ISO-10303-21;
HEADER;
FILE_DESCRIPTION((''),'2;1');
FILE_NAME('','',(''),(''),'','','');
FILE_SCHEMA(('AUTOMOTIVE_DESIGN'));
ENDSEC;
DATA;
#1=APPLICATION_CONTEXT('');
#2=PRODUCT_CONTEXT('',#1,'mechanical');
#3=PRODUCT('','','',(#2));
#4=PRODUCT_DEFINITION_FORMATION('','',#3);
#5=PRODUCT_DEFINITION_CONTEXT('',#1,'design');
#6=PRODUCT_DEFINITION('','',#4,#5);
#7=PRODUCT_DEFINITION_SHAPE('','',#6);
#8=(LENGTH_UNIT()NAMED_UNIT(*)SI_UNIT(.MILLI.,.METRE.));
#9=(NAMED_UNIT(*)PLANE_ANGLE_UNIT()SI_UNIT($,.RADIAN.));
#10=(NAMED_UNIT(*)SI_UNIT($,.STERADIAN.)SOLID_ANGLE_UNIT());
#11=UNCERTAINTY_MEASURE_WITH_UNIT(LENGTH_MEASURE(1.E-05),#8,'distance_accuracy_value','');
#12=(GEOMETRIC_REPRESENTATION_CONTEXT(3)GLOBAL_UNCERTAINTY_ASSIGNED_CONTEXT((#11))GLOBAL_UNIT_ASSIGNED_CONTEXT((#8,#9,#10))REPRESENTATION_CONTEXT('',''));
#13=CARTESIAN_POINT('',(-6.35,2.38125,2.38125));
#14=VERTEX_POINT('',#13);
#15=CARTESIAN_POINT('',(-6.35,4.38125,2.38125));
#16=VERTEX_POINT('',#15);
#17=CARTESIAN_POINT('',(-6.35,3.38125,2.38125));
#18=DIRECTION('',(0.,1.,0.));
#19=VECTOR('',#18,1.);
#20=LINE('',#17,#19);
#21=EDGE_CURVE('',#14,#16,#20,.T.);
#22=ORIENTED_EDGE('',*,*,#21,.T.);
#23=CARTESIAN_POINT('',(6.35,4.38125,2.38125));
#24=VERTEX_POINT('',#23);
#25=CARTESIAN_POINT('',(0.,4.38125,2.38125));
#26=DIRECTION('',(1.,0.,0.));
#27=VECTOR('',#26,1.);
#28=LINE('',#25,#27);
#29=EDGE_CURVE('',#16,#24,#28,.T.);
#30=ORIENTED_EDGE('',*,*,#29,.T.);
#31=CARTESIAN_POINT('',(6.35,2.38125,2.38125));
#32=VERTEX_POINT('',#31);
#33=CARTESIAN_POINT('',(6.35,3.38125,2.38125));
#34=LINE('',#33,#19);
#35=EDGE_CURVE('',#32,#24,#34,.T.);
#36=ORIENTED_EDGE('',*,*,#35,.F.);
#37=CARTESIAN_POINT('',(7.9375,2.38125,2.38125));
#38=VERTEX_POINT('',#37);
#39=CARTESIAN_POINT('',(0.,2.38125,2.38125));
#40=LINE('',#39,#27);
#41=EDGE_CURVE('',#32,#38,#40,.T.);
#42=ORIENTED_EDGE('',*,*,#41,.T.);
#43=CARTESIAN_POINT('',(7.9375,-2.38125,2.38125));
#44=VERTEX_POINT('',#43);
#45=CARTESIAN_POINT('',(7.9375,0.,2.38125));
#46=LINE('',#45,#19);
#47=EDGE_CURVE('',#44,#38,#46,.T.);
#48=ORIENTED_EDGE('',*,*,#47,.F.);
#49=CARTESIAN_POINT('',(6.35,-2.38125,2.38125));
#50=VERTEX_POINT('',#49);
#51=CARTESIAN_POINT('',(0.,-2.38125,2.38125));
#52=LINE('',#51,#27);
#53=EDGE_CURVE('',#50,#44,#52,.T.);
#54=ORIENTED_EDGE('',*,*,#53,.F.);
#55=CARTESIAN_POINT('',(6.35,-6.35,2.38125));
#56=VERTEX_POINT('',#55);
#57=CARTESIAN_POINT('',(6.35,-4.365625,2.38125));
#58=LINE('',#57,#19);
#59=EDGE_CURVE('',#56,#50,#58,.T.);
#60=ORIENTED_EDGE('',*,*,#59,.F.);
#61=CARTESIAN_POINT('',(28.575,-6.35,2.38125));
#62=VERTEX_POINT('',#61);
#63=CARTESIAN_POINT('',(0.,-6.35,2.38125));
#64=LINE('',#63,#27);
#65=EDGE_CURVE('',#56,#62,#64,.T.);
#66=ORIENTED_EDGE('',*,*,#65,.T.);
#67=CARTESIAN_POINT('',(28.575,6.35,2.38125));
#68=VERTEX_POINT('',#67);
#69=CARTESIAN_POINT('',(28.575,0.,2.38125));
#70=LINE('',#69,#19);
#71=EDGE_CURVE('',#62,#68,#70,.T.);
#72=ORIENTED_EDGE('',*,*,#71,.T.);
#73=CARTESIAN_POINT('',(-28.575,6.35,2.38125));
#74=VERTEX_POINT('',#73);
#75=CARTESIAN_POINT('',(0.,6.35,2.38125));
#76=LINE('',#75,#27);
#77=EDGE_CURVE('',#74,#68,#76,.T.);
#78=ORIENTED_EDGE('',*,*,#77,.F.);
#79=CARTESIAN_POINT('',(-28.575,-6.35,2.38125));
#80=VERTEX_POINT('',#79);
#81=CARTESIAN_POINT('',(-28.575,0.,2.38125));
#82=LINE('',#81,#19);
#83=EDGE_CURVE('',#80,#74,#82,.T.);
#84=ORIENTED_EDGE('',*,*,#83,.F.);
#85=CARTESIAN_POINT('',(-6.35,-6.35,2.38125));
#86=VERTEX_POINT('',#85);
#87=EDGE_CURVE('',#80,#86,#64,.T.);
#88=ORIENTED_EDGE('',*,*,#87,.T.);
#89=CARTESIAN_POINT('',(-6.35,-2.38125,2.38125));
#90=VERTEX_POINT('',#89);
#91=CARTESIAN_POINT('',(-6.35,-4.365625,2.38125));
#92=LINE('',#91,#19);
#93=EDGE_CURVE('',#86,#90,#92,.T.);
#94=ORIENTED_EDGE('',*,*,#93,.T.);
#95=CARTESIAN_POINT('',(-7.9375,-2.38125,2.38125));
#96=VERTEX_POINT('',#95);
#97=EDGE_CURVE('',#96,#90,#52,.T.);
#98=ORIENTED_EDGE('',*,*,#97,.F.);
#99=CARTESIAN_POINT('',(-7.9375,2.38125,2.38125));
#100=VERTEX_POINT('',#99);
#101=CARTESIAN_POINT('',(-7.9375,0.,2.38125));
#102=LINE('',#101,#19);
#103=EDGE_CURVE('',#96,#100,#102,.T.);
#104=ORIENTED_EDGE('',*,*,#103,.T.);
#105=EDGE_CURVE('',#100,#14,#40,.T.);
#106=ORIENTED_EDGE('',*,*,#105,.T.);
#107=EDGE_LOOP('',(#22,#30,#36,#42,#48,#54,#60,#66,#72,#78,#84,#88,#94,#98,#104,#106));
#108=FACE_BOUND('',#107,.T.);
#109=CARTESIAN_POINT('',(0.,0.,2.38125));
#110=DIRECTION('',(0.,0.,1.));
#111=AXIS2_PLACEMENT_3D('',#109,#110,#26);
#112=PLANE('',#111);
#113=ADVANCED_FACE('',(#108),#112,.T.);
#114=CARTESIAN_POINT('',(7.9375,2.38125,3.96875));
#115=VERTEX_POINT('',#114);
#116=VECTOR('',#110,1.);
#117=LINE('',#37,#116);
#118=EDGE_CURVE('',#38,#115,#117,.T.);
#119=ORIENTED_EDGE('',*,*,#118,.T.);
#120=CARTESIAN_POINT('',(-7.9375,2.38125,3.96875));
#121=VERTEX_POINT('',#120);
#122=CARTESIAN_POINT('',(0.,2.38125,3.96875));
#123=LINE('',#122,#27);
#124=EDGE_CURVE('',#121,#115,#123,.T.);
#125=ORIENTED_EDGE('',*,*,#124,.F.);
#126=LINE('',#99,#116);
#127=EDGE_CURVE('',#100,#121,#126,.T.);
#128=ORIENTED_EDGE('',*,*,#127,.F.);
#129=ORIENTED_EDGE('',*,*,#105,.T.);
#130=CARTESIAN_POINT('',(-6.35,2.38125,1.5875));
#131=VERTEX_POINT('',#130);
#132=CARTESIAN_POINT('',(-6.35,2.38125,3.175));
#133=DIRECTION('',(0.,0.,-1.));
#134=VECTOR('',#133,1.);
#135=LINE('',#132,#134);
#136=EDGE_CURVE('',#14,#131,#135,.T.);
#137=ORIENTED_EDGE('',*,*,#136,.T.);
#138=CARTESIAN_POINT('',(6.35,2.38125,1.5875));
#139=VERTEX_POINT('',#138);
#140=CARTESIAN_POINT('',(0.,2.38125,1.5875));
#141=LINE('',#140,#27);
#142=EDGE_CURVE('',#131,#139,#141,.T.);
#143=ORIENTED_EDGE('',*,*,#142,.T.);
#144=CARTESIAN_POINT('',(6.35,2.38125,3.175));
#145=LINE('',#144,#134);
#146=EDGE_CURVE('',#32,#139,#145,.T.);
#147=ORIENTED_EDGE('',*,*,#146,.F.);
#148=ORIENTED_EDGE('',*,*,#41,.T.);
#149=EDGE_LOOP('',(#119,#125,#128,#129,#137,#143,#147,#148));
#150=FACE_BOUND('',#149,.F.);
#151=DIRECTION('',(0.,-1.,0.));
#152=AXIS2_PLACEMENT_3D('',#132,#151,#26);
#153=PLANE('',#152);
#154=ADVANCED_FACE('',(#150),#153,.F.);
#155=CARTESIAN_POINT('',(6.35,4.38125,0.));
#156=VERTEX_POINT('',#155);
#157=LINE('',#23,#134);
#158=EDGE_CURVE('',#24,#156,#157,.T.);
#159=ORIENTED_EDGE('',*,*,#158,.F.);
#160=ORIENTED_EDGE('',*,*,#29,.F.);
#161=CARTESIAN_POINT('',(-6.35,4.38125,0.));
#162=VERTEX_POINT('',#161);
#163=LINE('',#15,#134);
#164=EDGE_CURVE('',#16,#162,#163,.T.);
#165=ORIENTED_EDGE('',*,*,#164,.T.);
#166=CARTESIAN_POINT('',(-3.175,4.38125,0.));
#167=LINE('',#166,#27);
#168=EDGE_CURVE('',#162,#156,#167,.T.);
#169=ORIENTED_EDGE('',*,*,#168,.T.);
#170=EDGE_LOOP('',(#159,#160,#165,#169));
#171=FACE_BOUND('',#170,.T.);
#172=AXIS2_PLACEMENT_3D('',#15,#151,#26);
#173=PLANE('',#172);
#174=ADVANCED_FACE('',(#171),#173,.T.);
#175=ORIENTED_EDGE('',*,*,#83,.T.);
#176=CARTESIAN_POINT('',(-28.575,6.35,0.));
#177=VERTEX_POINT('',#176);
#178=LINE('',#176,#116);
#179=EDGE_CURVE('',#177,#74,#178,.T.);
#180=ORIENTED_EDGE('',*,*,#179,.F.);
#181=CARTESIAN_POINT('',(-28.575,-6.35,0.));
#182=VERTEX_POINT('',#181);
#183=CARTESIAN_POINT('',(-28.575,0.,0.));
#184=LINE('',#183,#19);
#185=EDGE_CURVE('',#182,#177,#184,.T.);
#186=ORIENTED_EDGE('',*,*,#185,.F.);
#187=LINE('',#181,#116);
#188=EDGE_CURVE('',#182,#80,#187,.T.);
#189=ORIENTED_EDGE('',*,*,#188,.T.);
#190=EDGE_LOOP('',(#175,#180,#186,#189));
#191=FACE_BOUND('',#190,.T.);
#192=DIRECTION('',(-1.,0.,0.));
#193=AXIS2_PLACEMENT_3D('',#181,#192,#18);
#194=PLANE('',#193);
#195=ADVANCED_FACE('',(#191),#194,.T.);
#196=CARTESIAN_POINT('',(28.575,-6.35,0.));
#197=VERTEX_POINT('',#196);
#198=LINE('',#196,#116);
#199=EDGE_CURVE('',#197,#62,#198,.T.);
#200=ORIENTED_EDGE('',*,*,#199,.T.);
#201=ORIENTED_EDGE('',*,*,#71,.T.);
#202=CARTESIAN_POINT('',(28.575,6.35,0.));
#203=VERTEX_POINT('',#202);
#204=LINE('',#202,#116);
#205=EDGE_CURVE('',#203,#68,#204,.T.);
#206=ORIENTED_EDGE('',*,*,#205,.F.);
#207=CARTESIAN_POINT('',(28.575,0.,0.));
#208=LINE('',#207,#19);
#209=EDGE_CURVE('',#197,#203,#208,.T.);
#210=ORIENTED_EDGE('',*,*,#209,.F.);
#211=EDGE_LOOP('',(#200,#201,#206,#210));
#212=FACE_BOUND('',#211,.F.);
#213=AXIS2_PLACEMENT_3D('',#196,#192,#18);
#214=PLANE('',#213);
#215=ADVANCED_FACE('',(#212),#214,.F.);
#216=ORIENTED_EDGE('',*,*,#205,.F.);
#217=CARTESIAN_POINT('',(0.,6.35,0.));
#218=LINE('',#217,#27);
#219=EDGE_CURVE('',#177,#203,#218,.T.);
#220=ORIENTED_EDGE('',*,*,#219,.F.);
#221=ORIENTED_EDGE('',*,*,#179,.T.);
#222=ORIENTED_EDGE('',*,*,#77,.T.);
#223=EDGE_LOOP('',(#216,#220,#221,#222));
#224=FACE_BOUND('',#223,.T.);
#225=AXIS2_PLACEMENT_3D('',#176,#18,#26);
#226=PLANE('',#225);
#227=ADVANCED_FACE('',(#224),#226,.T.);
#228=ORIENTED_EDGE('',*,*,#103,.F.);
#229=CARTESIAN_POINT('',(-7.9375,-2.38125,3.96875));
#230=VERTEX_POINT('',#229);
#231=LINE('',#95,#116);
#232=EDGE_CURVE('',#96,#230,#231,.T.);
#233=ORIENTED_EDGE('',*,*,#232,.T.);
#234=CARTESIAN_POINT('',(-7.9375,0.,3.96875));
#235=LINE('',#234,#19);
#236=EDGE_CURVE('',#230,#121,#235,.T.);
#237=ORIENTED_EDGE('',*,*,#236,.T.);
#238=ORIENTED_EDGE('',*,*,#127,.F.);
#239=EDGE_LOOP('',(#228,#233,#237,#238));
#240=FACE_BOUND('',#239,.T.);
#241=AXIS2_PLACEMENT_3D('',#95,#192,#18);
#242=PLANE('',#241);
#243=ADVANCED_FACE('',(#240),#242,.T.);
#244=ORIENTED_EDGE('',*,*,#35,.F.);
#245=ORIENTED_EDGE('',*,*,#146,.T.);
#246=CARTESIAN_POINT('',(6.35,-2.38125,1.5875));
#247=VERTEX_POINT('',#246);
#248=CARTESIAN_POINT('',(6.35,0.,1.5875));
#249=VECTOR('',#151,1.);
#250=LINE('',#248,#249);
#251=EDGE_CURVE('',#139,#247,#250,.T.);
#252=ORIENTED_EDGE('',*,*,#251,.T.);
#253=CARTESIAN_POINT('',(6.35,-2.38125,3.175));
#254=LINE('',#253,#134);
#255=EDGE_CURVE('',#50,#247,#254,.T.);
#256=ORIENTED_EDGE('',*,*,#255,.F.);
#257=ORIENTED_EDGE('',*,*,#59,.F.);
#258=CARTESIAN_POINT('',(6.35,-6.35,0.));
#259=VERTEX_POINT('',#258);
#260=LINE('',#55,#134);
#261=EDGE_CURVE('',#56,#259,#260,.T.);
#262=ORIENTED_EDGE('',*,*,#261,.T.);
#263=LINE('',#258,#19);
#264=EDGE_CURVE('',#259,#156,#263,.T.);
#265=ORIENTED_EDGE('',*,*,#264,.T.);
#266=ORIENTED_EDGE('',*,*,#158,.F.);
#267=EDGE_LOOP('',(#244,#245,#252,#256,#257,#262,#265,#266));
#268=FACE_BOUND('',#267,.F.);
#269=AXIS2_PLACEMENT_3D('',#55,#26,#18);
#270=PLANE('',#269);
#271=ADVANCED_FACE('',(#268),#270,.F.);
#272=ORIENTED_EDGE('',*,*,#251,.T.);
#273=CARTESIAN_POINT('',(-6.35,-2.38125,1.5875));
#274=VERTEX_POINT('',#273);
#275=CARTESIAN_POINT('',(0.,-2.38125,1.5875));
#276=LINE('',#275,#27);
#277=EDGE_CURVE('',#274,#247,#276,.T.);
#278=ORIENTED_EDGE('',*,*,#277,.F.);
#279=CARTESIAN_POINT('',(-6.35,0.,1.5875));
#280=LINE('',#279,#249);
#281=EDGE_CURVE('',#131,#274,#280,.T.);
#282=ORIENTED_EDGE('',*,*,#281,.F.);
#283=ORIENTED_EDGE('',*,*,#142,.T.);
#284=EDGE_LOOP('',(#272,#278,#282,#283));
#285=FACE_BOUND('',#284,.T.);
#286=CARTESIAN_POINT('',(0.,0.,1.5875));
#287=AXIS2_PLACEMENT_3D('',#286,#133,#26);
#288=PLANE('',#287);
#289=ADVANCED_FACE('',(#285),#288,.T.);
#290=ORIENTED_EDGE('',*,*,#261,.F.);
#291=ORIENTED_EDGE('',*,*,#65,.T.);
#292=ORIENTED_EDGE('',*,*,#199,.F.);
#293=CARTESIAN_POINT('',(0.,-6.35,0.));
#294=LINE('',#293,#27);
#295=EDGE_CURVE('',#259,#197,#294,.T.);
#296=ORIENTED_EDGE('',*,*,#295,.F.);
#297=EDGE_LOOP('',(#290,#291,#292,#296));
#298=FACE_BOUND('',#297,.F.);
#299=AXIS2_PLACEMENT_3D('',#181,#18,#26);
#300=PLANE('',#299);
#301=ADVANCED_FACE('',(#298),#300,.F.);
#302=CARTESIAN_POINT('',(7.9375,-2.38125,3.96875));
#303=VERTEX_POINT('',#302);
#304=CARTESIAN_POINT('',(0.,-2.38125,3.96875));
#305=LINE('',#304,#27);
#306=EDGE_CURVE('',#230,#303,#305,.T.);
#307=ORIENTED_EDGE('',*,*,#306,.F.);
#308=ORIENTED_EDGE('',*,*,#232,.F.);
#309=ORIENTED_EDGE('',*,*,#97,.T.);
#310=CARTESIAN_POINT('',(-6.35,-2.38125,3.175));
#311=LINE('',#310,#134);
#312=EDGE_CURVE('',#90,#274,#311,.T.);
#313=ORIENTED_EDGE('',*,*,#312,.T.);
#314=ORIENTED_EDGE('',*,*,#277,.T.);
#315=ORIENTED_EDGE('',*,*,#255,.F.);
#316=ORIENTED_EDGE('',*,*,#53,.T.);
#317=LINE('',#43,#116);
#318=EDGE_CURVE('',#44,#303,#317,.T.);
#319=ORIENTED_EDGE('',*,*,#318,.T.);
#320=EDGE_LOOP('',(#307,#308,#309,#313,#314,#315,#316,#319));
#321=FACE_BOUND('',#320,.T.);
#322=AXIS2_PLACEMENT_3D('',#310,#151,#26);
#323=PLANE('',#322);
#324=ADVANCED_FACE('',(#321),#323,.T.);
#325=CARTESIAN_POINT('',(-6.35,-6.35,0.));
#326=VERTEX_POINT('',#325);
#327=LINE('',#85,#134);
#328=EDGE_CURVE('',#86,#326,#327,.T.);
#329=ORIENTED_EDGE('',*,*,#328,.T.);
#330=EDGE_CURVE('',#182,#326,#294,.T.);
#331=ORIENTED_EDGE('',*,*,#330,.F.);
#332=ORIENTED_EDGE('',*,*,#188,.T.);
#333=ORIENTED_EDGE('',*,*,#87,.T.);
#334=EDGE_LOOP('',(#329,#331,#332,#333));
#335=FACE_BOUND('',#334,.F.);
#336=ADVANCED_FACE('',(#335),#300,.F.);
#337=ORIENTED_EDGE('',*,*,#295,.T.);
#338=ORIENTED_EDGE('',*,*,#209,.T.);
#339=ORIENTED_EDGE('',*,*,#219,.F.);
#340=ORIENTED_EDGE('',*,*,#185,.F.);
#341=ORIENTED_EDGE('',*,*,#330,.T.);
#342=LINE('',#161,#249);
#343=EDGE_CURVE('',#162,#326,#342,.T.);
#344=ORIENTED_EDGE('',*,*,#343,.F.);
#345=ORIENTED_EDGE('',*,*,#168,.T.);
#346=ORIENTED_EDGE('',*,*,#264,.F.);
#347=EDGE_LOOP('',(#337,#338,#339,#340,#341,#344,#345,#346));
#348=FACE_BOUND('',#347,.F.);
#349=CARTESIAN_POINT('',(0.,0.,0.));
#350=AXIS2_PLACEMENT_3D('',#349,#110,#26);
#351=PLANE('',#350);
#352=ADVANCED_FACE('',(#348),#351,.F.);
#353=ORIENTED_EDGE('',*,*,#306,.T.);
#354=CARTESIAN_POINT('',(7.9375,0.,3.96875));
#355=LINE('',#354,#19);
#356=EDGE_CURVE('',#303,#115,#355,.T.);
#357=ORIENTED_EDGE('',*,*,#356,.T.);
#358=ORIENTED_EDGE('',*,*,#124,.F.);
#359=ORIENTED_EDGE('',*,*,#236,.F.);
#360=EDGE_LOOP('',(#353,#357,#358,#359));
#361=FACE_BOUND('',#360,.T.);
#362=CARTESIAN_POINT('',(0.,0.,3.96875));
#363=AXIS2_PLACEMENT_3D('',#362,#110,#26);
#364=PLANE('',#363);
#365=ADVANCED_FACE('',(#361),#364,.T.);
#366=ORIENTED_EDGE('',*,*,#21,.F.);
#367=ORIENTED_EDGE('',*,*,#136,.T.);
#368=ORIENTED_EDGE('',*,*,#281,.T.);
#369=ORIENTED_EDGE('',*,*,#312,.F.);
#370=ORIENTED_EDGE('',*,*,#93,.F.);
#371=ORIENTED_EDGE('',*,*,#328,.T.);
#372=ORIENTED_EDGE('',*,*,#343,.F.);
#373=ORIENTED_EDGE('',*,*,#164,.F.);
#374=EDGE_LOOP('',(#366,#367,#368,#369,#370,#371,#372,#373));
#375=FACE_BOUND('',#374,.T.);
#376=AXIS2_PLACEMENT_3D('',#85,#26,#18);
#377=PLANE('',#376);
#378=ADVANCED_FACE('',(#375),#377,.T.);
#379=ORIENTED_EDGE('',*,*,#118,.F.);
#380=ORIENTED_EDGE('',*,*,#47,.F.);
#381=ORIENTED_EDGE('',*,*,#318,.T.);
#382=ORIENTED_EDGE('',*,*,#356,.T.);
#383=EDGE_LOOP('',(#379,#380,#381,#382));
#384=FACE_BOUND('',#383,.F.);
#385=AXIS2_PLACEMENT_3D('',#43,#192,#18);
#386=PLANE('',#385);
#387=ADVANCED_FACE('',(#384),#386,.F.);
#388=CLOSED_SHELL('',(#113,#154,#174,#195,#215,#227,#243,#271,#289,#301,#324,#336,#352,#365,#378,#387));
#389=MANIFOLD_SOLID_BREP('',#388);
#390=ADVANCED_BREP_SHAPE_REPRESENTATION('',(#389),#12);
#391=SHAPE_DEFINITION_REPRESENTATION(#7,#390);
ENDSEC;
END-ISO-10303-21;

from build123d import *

# Parameters (mm, degrees)
F0_W      = 57.15
F0_H      = 12.7
F1_DEPTH  = 2.38125
F2_W      = 15.875
F2_H      = 4.7625
F3_DEPTH  = 1.5875
F5_W      = 12.7
F5_H      = 4.7625
F6_DEPTH  = 3.175
F7_W      = 12.7
F7_H      = 3.96875
F8_DEPTH  = 2.38225
F9_W      = 12.7
F9_H      = 2
F10_DEPTH = 2.38225
F11_W     = 12.7
F11_H     = 4.7625
F12_DEPTH = 1.5875


# Not quite as in the source:
# - a feature of the source that left no trace in its solid (it failed there, or was rolled back) is left out
# - a length typed as a fraction of an inch, garbled in the dataset ("3 / 203.2 mm" for 3/8 in), is restored


with BuildPart() as f1:
    # F0 (on Top) → F1 (new body)
    with BuildSketch(Plane.XY):
        Rectangle(F0_W, F0_H)
    extrude(amount=F1_DEPTH)

    # F2 (on face) → F3 (join)
    with BuildSketch(Plane.XY.offset(2.38125)):
        Rectangle(F2_W, F2_H)
    extrude(amount=F3_DEPTH)

    # F5 (on offset) → F6 (cut, through all)
    with BuildSketch(Plane.XY.offset(3.175)):
        Rectangle(F5_W, F5_H)
    extrude(amount=-F6_DEPTH, mode=Mode.SUBTRACT)

    # F7 (on face) → F8 (cut, through all)
    with BuildSketch(Plane.XY.offset(2.38125)):
        with Locations((0, -4.365625)):
            Rectangle(F7_W, F7_H)
    extrude(amount=-F8_DEPTH, mode=Mode.SUBTRACT)

    # F9 (on face) → F10 (cut, through all)
    with BuildSketch(Plane.XY.offset(2.38125)):
        with Locations((0, 3.38125)):
            Rectangle(F9_W, F9_H)
    extrude(amount=-F10_DEPTH, mode=Mode.SUBTRACT)

    # F11 (on face) → F12 (join)
    with BuildSketch(Plane(origin=(0, 0, 3.175), x_dir=(1, 0, 0), z_dir=(0, 0, -1))):
        Rectangle(F11_W, F11_H)
    extrude(amount=F12_DEPTH)


solid = f1.part
